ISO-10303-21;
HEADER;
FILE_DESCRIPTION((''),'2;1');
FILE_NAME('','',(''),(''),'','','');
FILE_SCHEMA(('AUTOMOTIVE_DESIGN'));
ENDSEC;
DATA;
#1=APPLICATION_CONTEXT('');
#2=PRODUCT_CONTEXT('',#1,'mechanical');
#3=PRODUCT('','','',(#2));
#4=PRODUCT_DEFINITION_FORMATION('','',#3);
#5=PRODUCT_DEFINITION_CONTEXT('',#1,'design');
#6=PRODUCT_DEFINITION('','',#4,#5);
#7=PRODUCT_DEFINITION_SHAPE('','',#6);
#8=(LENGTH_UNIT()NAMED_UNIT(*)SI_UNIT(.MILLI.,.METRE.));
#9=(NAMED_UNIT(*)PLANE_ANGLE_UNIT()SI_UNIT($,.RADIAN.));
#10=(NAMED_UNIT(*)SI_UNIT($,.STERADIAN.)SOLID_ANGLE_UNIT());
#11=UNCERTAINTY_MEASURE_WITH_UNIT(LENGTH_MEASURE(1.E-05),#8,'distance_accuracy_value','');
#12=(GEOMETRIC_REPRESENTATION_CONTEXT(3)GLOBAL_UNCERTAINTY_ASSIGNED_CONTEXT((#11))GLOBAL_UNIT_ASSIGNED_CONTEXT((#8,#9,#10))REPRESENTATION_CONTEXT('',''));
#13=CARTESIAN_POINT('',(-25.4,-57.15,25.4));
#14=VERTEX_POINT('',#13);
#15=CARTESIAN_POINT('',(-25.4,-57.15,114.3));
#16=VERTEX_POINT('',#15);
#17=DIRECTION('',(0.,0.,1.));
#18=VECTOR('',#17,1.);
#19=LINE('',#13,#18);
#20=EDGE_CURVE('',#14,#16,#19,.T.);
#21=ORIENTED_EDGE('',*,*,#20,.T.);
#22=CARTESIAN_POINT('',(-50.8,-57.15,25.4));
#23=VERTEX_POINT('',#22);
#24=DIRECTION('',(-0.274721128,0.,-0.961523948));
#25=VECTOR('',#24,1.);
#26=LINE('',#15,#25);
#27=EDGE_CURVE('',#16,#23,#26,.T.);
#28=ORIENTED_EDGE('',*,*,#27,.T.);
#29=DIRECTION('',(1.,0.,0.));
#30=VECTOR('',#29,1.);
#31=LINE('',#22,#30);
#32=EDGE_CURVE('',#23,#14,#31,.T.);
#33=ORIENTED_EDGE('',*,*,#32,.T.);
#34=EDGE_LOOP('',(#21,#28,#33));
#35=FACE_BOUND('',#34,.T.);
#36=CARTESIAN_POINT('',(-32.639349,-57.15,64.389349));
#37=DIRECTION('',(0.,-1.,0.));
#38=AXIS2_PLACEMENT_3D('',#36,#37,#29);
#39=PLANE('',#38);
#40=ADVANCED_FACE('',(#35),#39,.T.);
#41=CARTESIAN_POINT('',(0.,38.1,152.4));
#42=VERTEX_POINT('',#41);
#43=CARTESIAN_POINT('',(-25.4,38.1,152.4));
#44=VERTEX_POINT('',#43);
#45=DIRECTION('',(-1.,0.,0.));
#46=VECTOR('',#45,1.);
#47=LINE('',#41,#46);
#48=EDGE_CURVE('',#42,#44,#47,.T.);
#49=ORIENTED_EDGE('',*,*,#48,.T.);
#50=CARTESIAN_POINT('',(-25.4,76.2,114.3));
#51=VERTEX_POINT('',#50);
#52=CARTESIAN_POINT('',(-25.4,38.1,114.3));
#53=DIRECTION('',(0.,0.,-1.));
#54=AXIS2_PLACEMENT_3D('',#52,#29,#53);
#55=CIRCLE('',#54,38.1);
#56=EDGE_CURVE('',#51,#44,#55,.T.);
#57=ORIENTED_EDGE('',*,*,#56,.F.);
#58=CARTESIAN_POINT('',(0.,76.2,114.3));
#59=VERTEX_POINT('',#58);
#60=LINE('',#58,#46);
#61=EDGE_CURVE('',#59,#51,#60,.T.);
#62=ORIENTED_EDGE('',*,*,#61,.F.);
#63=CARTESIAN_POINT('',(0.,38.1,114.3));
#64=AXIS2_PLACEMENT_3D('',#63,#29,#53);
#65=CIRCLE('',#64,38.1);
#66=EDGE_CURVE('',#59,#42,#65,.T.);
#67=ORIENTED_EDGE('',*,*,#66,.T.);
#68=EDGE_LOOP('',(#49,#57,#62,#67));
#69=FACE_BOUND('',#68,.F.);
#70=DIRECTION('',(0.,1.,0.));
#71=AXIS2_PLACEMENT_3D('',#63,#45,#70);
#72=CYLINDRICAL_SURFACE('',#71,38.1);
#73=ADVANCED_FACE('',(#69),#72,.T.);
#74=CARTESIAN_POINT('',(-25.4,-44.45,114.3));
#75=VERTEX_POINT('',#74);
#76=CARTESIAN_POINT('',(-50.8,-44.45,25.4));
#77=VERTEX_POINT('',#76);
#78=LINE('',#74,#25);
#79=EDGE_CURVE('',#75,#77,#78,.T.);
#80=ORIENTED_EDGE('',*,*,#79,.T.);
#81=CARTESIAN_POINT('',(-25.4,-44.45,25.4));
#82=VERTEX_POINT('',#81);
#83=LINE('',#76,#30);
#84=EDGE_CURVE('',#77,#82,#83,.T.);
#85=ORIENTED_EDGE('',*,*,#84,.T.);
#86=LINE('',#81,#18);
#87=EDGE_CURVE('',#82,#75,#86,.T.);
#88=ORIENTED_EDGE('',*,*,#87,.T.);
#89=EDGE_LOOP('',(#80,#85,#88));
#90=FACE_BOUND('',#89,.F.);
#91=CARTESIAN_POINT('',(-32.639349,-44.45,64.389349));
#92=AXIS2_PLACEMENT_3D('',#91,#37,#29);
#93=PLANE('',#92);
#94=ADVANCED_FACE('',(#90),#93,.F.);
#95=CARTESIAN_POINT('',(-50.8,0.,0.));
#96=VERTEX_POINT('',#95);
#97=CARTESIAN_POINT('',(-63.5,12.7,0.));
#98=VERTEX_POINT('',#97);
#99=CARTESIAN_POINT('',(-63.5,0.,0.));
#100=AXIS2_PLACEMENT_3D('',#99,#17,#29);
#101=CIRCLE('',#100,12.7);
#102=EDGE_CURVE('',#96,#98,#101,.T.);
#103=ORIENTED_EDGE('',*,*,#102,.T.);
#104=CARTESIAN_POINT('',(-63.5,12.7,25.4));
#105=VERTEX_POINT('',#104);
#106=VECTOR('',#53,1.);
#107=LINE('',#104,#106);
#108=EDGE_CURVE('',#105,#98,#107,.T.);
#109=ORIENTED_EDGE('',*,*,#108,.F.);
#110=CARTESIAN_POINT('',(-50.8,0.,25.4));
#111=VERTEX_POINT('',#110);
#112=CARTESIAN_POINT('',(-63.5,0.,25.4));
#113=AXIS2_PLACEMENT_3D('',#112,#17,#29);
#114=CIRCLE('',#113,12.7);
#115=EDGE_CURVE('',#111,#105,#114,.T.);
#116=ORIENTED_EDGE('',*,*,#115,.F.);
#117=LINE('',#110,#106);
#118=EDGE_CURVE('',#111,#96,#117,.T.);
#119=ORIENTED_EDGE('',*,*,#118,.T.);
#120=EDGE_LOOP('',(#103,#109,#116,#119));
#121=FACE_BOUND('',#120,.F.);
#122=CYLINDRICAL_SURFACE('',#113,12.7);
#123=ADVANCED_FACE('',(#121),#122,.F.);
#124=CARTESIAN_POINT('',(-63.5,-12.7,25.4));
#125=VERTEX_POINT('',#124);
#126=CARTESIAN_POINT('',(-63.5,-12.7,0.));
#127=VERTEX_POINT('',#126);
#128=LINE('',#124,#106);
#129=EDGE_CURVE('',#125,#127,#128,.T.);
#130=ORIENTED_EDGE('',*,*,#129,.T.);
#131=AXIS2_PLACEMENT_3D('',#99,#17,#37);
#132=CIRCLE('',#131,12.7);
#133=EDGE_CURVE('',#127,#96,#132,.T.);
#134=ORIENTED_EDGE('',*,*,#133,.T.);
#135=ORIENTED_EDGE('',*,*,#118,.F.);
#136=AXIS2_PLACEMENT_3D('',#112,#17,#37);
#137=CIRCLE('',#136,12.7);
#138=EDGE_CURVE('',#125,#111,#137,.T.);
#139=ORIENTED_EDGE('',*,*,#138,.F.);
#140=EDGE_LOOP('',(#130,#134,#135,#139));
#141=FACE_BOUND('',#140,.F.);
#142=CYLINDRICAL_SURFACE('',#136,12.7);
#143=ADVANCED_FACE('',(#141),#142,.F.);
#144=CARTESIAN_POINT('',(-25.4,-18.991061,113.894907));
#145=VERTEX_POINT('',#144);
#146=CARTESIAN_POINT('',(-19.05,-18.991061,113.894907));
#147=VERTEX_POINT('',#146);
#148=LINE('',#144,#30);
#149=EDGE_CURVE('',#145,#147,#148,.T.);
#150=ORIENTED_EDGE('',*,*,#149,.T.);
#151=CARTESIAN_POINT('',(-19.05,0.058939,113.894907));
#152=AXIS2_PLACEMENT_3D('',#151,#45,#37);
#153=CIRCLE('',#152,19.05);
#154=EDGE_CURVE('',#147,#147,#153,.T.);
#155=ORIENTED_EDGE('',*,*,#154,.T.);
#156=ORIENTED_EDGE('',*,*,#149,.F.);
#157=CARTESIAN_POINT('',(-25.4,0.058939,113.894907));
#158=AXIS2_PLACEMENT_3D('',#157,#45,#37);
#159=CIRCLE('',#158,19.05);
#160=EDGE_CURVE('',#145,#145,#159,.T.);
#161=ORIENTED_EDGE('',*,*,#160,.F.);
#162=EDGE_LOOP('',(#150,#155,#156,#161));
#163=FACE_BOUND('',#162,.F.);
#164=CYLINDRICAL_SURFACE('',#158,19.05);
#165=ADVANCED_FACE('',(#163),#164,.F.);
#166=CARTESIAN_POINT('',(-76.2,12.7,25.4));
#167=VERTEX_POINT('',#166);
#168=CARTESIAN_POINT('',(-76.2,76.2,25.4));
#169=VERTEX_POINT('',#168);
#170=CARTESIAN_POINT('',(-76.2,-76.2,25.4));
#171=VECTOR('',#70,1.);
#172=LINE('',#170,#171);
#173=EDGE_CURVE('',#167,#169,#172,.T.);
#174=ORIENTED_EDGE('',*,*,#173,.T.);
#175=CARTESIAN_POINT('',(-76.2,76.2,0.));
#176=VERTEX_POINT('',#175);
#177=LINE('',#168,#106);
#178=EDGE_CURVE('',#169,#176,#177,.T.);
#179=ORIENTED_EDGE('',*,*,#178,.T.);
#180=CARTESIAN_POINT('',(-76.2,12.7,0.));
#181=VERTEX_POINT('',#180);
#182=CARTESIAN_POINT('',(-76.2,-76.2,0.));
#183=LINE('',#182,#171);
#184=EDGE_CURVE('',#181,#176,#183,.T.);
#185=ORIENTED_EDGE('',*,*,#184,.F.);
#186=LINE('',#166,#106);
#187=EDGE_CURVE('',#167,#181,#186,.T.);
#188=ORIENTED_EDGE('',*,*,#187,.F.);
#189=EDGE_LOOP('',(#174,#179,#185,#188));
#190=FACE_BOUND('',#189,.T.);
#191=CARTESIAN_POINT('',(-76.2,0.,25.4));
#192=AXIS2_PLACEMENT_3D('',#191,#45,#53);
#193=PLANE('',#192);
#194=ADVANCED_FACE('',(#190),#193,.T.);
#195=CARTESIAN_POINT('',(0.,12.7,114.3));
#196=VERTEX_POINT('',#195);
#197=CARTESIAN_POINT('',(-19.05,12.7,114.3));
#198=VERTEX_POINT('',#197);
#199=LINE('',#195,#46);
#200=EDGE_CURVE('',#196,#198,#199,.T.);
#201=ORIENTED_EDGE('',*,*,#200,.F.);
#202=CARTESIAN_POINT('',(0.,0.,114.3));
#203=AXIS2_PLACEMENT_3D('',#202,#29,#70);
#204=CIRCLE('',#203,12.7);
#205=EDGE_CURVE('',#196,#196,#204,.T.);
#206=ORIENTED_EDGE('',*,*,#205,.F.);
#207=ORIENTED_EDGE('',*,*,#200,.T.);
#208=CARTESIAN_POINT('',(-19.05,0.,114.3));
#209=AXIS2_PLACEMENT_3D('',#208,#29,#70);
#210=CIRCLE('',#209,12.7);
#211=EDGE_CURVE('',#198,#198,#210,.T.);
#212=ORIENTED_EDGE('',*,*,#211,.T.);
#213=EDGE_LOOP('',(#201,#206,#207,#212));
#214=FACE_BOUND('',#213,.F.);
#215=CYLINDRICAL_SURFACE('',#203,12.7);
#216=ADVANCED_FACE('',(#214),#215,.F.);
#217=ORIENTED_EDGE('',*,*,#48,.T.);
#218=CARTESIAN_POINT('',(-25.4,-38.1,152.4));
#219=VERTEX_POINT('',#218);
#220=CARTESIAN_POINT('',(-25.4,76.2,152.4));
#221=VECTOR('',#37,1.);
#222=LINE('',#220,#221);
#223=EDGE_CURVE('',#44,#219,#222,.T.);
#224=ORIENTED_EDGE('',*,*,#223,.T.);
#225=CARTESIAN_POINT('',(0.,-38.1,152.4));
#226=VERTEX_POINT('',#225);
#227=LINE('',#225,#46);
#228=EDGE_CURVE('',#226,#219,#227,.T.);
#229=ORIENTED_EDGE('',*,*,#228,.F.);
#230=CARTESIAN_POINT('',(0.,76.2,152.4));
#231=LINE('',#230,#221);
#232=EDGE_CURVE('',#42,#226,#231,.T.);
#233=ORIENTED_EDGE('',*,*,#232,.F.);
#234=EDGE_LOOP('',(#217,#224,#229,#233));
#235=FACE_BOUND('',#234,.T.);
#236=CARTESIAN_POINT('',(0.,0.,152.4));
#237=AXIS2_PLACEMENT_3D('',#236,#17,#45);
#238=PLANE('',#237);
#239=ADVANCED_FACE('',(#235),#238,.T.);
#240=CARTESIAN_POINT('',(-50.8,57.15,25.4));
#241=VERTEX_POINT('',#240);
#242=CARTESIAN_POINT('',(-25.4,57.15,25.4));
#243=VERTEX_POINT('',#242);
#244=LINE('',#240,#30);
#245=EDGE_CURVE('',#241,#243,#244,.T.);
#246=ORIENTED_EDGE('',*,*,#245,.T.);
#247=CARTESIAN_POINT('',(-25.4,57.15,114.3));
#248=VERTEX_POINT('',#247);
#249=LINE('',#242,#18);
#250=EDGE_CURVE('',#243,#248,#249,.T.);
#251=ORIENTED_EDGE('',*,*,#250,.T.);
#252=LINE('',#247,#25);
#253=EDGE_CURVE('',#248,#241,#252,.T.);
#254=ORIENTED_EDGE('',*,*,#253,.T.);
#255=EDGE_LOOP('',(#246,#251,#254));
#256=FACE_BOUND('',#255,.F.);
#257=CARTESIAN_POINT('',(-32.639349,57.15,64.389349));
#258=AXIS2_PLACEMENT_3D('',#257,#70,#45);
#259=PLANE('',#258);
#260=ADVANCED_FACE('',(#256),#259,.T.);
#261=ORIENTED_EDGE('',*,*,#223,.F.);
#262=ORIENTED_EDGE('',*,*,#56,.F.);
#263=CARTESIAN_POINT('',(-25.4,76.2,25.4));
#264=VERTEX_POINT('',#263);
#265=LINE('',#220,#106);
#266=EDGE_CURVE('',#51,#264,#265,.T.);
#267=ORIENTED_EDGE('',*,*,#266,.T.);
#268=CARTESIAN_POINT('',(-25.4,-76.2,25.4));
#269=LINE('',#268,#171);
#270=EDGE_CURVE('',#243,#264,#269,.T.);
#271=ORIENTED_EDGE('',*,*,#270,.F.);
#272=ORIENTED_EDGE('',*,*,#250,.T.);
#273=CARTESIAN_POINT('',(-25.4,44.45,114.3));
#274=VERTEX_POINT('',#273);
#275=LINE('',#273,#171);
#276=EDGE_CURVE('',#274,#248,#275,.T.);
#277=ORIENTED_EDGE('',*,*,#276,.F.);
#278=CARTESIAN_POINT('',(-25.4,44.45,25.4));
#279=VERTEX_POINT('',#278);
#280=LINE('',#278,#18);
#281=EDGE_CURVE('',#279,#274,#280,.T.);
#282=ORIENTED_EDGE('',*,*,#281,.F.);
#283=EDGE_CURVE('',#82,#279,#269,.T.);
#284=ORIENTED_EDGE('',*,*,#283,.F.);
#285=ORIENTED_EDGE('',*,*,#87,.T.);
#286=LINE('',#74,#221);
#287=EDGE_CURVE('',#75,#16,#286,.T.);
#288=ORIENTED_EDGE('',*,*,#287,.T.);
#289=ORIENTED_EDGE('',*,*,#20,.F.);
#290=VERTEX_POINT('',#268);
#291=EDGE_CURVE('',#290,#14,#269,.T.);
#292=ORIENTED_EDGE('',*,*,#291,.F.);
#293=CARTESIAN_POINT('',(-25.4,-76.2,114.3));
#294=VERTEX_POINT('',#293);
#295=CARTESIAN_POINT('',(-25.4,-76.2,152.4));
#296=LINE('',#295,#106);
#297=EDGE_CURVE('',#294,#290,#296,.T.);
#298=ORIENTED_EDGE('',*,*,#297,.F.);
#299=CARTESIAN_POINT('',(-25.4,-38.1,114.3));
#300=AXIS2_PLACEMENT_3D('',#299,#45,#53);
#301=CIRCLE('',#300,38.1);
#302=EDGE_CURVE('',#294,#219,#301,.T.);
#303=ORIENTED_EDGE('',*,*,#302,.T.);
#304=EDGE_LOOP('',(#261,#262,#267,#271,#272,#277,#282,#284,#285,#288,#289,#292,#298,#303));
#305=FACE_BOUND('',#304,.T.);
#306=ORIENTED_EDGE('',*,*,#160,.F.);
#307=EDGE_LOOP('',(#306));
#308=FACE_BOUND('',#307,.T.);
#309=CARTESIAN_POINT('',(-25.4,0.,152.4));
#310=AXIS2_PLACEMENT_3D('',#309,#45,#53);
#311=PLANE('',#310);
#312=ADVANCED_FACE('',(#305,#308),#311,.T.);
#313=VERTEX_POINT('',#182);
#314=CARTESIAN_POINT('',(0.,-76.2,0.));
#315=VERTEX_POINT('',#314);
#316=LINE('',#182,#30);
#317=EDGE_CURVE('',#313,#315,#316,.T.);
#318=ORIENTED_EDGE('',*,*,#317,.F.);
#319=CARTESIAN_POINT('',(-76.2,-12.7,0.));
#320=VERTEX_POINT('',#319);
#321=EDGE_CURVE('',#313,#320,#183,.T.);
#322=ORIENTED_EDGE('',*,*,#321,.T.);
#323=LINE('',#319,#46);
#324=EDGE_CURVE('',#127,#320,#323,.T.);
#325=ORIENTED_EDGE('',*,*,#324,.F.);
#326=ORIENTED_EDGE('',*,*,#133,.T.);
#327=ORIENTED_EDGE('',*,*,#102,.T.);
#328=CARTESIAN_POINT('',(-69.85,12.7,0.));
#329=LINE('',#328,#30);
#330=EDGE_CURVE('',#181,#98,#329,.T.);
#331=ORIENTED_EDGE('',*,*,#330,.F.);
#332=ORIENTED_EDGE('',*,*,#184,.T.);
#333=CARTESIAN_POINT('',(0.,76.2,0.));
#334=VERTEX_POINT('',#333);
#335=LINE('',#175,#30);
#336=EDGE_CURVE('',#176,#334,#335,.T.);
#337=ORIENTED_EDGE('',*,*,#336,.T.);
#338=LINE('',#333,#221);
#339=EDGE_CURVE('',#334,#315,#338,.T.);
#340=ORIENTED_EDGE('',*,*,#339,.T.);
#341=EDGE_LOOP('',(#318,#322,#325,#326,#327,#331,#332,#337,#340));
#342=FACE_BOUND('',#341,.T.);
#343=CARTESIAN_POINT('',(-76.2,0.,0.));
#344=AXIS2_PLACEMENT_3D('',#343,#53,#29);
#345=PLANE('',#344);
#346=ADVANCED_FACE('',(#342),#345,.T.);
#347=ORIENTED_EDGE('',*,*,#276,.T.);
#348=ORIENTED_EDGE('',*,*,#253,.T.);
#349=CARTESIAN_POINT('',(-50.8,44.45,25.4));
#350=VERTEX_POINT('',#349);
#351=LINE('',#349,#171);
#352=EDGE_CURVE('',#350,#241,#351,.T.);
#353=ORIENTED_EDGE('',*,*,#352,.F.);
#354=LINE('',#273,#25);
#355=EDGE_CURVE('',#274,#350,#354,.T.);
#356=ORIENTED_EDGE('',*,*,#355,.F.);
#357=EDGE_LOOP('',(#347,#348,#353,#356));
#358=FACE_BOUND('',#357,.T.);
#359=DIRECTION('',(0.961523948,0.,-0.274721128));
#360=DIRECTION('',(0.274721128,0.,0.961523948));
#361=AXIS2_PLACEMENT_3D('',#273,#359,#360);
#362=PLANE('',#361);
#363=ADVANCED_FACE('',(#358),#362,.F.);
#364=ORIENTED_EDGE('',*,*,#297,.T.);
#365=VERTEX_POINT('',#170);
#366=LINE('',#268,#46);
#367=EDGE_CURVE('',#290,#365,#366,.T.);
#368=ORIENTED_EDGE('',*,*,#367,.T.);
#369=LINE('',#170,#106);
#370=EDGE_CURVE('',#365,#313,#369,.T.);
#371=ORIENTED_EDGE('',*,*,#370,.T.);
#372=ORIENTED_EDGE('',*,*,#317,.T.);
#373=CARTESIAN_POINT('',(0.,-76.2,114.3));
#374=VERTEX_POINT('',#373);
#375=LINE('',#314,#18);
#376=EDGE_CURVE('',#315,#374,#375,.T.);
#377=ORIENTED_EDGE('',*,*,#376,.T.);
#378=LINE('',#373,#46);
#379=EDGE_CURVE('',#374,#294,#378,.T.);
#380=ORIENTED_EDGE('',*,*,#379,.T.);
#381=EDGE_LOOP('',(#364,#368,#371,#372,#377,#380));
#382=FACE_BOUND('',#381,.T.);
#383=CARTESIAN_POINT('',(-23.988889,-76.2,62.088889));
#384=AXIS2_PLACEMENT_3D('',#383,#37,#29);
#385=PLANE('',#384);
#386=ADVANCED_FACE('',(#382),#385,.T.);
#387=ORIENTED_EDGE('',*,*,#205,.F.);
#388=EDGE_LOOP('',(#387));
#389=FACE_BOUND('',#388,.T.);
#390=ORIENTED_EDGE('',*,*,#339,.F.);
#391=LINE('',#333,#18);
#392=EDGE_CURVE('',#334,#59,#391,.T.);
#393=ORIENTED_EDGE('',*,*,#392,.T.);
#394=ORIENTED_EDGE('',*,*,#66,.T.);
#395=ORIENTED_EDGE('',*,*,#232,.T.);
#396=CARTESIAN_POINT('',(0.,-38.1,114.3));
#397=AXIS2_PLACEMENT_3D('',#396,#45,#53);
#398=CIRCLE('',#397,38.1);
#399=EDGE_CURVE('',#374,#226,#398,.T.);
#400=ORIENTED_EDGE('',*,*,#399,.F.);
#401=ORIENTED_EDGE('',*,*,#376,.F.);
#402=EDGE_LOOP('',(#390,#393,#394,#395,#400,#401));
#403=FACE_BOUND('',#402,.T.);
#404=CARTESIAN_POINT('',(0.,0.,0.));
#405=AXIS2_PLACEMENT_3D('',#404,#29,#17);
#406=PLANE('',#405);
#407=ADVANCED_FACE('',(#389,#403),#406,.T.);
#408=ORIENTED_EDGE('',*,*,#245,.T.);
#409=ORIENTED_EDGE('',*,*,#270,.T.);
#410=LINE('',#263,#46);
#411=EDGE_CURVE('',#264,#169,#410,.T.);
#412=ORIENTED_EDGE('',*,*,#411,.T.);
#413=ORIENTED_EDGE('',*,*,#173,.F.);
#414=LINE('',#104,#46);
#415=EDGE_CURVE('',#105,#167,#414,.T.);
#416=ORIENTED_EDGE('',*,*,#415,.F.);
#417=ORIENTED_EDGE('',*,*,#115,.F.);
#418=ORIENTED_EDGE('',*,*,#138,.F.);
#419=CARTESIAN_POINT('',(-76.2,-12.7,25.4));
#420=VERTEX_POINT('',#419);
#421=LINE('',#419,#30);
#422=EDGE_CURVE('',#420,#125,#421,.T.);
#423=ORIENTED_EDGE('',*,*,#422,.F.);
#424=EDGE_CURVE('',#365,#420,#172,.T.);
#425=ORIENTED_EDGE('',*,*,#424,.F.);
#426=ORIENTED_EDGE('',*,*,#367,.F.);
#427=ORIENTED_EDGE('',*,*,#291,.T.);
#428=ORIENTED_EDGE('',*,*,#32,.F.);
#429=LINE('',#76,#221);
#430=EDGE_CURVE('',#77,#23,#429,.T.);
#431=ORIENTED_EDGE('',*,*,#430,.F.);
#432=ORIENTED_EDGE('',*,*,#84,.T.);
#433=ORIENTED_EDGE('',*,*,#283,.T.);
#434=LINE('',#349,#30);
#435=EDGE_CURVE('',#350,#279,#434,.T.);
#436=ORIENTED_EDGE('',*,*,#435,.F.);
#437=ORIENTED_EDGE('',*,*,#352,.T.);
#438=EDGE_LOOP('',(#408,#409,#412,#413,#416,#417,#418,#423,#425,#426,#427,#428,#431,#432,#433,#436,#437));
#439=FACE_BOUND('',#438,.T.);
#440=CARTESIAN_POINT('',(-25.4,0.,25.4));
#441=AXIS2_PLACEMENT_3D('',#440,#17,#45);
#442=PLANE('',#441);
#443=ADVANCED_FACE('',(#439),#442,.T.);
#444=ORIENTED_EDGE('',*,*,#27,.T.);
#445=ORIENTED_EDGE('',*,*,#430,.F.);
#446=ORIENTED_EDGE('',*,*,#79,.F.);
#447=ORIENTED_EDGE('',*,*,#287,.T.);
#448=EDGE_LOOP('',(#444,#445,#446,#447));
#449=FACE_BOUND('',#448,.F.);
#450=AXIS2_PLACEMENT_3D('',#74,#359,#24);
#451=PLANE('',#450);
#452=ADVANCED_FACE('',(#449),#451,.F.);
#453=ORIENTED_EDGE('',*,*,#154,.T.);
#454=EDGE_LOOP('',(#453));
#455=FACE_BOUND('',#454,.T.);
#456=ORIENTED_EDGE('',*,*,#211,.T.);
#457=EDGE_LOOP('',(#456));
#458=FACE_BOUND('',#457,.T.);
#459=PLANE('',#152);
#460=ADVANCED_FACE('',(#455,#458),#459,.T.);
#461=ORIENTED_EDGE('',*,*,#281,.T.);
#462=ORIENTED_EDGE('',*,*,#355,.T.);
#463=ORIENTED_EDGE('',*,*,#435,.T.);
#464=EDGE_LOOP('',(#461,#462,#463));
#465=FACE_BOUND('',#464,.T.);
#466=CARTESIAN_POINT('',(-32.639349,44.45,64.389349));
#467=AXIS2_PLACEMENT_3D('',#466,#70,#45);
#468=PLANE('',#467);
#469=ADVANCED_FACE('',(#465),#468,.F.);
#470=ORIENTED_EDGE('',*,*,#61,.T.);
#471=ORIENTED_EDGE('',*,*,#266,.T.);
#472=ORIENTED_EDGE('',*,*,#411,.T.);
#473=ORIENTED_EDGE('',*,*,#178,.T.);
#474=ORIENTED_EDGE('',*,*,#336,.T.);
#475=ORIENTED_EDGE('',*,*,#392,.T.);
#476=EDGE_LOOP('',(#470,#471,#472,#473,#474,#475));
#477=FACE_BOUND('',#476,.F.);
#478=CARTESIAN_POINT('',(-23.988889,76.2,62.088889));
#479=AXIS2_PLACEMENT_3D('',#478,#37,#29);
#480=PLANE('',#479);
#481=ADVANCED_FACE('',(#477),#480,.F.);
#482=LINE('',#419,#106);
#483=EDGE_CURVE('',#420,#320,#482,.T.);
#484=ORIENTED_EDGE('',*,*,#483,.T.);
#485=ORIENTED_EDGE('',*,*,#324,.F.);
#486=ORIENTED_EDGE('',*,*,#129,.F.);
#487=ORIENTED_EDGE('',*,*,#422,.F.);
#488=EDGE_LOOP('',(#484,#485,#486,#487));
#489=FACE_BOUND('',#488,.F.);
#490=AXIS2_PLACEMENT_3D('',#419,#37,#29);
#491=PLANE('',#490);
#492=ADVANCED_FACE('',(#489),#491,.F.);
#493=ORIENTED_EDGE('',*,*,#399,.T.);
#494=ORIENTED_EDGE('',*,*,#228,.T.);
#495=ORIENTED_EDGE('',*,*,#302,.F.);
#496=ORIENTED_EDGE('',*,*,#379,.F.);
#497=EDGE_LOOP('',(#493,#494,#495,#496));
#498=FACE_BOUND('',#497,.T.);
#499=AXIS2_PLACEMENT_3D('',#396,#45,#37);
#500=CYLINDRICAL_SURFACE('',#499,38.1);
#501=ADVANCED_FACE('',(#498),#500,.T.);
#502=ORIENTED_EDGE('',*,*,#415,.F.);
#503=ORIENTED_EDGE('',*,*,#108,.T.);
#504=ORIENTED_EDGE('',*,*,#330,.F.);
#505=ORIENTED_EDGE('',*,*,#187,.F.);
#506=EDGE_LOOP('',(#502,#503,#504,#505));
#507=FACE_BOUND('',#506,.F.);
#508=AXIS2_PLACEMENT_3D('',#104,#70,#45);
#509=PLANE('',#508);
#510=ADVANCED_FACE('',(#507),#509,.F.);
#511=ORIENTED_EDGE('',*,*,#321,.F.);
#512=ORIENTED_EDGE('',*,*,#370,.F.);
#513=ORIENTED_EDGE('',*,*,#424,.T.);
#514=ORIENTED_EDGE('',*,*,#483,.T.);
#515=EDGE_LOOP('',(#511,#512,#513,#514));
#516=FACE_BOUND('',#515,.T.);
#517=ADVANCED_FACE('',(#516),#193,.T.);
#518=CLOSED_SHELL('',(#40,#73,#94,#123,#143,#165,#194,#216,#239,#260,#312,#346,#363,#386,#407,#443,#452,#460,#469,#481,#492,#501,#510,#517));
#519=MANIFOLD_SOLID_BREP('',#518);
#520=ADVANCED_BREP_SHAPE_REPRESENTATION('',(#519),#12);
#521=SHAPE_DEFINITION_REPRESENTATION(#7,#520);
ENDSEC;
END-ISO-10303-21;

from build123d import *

# Parameters (mm, degrees)
F1_DEPTH  = 76.2
F2_R      = 12.7
F3_DEPTH  = 76.201
F5_DEPTH  = 46.736
F6_R      = 19.05
F7_DEPTH  = 6.35
F8_R      = 38.1
F11_DEPTH = 12.7


# Not quite as in the source:
# - a pattern or mirror of a feature is missing from the dataset's text; its kind, count and spacing are read off the source's solid


with BuildPart() as f1:
    # F0 (on Front) → F1 (new body, symmetric)
    with BuildSketch(Plane.XZ):
        Polygon((-76.2, 0), (0, 0), (0, 152.4), (-25.4, 152.4), (-25.4, 25.4), (-76.2, 25.4), align=None)
    extrude(amount=F1_DEPTH, both=True)

    # F2 (on Right) → F3 (cut, through all)
    with BuildSketch(Plane.YZ):
        with Locations((0, 114.3)):
            Circle(F2_R)
    extrude(amount=-F3_DEPTH, mode=Mode.SUBTRACT)

    # F4 (on face) → F5 (cut)
    with BuildSketch(Plane.XY.offset(25.4)):
        with BuildLine():
            ThreePointArc((-63.5, -12.7), (-54.5197438789, -8.9802561211), (-50.8, 0))
            ThreePointArc((-50.8, 0), (-54.5197438789, 8.9802561211), (-63.5, 12.7))
            Line((-63.5, 12.7), (-76.2, 12.7))
            Line((-76.2, 12.7), (-76.2, -12.7))
            Line((-76.2, -12.7), (-63.5, -12.7))
        make_face()
    extrude(amount=-F5_DEPTH, mode=Mode.SUBTRACT)

    # F6 (on face) → F7 (cut)
    with BuildSketch(Plane(origin=(-25.4, 0, 0), x_dir=(0, -1, 0), z_dir=(-1, 0, 0))):
        with Locations((-0.0589386239, 113.8949071477)):
            Circle(F6_R)
    extrude(amount=-F7_DEPTH, mode=Mode.SUBTRACT)

    # F8
    f8_edges = [f1.edges().sort_by_distance(p)[0] for p in [
        (-12.7, 76.2, 152.4),
        (-12.7, -76.2, 152.4),
    ]]
    fillet(f8_edges, radius=F8_R)

    # F10 (on offset) → F11 (join)
    with BuildSketch(Plane.XZ.offset(44.45)):
        Polygon((-25.4, 25.4), (-25.4, 114.3), (-50.8, 25.4), align=None)
    f11 = extrude(amount=F11_DEPTH)

    # F11_copies: F11 across plane
    add(f11.mirror(Plane.ZX))


solid = f1.part
